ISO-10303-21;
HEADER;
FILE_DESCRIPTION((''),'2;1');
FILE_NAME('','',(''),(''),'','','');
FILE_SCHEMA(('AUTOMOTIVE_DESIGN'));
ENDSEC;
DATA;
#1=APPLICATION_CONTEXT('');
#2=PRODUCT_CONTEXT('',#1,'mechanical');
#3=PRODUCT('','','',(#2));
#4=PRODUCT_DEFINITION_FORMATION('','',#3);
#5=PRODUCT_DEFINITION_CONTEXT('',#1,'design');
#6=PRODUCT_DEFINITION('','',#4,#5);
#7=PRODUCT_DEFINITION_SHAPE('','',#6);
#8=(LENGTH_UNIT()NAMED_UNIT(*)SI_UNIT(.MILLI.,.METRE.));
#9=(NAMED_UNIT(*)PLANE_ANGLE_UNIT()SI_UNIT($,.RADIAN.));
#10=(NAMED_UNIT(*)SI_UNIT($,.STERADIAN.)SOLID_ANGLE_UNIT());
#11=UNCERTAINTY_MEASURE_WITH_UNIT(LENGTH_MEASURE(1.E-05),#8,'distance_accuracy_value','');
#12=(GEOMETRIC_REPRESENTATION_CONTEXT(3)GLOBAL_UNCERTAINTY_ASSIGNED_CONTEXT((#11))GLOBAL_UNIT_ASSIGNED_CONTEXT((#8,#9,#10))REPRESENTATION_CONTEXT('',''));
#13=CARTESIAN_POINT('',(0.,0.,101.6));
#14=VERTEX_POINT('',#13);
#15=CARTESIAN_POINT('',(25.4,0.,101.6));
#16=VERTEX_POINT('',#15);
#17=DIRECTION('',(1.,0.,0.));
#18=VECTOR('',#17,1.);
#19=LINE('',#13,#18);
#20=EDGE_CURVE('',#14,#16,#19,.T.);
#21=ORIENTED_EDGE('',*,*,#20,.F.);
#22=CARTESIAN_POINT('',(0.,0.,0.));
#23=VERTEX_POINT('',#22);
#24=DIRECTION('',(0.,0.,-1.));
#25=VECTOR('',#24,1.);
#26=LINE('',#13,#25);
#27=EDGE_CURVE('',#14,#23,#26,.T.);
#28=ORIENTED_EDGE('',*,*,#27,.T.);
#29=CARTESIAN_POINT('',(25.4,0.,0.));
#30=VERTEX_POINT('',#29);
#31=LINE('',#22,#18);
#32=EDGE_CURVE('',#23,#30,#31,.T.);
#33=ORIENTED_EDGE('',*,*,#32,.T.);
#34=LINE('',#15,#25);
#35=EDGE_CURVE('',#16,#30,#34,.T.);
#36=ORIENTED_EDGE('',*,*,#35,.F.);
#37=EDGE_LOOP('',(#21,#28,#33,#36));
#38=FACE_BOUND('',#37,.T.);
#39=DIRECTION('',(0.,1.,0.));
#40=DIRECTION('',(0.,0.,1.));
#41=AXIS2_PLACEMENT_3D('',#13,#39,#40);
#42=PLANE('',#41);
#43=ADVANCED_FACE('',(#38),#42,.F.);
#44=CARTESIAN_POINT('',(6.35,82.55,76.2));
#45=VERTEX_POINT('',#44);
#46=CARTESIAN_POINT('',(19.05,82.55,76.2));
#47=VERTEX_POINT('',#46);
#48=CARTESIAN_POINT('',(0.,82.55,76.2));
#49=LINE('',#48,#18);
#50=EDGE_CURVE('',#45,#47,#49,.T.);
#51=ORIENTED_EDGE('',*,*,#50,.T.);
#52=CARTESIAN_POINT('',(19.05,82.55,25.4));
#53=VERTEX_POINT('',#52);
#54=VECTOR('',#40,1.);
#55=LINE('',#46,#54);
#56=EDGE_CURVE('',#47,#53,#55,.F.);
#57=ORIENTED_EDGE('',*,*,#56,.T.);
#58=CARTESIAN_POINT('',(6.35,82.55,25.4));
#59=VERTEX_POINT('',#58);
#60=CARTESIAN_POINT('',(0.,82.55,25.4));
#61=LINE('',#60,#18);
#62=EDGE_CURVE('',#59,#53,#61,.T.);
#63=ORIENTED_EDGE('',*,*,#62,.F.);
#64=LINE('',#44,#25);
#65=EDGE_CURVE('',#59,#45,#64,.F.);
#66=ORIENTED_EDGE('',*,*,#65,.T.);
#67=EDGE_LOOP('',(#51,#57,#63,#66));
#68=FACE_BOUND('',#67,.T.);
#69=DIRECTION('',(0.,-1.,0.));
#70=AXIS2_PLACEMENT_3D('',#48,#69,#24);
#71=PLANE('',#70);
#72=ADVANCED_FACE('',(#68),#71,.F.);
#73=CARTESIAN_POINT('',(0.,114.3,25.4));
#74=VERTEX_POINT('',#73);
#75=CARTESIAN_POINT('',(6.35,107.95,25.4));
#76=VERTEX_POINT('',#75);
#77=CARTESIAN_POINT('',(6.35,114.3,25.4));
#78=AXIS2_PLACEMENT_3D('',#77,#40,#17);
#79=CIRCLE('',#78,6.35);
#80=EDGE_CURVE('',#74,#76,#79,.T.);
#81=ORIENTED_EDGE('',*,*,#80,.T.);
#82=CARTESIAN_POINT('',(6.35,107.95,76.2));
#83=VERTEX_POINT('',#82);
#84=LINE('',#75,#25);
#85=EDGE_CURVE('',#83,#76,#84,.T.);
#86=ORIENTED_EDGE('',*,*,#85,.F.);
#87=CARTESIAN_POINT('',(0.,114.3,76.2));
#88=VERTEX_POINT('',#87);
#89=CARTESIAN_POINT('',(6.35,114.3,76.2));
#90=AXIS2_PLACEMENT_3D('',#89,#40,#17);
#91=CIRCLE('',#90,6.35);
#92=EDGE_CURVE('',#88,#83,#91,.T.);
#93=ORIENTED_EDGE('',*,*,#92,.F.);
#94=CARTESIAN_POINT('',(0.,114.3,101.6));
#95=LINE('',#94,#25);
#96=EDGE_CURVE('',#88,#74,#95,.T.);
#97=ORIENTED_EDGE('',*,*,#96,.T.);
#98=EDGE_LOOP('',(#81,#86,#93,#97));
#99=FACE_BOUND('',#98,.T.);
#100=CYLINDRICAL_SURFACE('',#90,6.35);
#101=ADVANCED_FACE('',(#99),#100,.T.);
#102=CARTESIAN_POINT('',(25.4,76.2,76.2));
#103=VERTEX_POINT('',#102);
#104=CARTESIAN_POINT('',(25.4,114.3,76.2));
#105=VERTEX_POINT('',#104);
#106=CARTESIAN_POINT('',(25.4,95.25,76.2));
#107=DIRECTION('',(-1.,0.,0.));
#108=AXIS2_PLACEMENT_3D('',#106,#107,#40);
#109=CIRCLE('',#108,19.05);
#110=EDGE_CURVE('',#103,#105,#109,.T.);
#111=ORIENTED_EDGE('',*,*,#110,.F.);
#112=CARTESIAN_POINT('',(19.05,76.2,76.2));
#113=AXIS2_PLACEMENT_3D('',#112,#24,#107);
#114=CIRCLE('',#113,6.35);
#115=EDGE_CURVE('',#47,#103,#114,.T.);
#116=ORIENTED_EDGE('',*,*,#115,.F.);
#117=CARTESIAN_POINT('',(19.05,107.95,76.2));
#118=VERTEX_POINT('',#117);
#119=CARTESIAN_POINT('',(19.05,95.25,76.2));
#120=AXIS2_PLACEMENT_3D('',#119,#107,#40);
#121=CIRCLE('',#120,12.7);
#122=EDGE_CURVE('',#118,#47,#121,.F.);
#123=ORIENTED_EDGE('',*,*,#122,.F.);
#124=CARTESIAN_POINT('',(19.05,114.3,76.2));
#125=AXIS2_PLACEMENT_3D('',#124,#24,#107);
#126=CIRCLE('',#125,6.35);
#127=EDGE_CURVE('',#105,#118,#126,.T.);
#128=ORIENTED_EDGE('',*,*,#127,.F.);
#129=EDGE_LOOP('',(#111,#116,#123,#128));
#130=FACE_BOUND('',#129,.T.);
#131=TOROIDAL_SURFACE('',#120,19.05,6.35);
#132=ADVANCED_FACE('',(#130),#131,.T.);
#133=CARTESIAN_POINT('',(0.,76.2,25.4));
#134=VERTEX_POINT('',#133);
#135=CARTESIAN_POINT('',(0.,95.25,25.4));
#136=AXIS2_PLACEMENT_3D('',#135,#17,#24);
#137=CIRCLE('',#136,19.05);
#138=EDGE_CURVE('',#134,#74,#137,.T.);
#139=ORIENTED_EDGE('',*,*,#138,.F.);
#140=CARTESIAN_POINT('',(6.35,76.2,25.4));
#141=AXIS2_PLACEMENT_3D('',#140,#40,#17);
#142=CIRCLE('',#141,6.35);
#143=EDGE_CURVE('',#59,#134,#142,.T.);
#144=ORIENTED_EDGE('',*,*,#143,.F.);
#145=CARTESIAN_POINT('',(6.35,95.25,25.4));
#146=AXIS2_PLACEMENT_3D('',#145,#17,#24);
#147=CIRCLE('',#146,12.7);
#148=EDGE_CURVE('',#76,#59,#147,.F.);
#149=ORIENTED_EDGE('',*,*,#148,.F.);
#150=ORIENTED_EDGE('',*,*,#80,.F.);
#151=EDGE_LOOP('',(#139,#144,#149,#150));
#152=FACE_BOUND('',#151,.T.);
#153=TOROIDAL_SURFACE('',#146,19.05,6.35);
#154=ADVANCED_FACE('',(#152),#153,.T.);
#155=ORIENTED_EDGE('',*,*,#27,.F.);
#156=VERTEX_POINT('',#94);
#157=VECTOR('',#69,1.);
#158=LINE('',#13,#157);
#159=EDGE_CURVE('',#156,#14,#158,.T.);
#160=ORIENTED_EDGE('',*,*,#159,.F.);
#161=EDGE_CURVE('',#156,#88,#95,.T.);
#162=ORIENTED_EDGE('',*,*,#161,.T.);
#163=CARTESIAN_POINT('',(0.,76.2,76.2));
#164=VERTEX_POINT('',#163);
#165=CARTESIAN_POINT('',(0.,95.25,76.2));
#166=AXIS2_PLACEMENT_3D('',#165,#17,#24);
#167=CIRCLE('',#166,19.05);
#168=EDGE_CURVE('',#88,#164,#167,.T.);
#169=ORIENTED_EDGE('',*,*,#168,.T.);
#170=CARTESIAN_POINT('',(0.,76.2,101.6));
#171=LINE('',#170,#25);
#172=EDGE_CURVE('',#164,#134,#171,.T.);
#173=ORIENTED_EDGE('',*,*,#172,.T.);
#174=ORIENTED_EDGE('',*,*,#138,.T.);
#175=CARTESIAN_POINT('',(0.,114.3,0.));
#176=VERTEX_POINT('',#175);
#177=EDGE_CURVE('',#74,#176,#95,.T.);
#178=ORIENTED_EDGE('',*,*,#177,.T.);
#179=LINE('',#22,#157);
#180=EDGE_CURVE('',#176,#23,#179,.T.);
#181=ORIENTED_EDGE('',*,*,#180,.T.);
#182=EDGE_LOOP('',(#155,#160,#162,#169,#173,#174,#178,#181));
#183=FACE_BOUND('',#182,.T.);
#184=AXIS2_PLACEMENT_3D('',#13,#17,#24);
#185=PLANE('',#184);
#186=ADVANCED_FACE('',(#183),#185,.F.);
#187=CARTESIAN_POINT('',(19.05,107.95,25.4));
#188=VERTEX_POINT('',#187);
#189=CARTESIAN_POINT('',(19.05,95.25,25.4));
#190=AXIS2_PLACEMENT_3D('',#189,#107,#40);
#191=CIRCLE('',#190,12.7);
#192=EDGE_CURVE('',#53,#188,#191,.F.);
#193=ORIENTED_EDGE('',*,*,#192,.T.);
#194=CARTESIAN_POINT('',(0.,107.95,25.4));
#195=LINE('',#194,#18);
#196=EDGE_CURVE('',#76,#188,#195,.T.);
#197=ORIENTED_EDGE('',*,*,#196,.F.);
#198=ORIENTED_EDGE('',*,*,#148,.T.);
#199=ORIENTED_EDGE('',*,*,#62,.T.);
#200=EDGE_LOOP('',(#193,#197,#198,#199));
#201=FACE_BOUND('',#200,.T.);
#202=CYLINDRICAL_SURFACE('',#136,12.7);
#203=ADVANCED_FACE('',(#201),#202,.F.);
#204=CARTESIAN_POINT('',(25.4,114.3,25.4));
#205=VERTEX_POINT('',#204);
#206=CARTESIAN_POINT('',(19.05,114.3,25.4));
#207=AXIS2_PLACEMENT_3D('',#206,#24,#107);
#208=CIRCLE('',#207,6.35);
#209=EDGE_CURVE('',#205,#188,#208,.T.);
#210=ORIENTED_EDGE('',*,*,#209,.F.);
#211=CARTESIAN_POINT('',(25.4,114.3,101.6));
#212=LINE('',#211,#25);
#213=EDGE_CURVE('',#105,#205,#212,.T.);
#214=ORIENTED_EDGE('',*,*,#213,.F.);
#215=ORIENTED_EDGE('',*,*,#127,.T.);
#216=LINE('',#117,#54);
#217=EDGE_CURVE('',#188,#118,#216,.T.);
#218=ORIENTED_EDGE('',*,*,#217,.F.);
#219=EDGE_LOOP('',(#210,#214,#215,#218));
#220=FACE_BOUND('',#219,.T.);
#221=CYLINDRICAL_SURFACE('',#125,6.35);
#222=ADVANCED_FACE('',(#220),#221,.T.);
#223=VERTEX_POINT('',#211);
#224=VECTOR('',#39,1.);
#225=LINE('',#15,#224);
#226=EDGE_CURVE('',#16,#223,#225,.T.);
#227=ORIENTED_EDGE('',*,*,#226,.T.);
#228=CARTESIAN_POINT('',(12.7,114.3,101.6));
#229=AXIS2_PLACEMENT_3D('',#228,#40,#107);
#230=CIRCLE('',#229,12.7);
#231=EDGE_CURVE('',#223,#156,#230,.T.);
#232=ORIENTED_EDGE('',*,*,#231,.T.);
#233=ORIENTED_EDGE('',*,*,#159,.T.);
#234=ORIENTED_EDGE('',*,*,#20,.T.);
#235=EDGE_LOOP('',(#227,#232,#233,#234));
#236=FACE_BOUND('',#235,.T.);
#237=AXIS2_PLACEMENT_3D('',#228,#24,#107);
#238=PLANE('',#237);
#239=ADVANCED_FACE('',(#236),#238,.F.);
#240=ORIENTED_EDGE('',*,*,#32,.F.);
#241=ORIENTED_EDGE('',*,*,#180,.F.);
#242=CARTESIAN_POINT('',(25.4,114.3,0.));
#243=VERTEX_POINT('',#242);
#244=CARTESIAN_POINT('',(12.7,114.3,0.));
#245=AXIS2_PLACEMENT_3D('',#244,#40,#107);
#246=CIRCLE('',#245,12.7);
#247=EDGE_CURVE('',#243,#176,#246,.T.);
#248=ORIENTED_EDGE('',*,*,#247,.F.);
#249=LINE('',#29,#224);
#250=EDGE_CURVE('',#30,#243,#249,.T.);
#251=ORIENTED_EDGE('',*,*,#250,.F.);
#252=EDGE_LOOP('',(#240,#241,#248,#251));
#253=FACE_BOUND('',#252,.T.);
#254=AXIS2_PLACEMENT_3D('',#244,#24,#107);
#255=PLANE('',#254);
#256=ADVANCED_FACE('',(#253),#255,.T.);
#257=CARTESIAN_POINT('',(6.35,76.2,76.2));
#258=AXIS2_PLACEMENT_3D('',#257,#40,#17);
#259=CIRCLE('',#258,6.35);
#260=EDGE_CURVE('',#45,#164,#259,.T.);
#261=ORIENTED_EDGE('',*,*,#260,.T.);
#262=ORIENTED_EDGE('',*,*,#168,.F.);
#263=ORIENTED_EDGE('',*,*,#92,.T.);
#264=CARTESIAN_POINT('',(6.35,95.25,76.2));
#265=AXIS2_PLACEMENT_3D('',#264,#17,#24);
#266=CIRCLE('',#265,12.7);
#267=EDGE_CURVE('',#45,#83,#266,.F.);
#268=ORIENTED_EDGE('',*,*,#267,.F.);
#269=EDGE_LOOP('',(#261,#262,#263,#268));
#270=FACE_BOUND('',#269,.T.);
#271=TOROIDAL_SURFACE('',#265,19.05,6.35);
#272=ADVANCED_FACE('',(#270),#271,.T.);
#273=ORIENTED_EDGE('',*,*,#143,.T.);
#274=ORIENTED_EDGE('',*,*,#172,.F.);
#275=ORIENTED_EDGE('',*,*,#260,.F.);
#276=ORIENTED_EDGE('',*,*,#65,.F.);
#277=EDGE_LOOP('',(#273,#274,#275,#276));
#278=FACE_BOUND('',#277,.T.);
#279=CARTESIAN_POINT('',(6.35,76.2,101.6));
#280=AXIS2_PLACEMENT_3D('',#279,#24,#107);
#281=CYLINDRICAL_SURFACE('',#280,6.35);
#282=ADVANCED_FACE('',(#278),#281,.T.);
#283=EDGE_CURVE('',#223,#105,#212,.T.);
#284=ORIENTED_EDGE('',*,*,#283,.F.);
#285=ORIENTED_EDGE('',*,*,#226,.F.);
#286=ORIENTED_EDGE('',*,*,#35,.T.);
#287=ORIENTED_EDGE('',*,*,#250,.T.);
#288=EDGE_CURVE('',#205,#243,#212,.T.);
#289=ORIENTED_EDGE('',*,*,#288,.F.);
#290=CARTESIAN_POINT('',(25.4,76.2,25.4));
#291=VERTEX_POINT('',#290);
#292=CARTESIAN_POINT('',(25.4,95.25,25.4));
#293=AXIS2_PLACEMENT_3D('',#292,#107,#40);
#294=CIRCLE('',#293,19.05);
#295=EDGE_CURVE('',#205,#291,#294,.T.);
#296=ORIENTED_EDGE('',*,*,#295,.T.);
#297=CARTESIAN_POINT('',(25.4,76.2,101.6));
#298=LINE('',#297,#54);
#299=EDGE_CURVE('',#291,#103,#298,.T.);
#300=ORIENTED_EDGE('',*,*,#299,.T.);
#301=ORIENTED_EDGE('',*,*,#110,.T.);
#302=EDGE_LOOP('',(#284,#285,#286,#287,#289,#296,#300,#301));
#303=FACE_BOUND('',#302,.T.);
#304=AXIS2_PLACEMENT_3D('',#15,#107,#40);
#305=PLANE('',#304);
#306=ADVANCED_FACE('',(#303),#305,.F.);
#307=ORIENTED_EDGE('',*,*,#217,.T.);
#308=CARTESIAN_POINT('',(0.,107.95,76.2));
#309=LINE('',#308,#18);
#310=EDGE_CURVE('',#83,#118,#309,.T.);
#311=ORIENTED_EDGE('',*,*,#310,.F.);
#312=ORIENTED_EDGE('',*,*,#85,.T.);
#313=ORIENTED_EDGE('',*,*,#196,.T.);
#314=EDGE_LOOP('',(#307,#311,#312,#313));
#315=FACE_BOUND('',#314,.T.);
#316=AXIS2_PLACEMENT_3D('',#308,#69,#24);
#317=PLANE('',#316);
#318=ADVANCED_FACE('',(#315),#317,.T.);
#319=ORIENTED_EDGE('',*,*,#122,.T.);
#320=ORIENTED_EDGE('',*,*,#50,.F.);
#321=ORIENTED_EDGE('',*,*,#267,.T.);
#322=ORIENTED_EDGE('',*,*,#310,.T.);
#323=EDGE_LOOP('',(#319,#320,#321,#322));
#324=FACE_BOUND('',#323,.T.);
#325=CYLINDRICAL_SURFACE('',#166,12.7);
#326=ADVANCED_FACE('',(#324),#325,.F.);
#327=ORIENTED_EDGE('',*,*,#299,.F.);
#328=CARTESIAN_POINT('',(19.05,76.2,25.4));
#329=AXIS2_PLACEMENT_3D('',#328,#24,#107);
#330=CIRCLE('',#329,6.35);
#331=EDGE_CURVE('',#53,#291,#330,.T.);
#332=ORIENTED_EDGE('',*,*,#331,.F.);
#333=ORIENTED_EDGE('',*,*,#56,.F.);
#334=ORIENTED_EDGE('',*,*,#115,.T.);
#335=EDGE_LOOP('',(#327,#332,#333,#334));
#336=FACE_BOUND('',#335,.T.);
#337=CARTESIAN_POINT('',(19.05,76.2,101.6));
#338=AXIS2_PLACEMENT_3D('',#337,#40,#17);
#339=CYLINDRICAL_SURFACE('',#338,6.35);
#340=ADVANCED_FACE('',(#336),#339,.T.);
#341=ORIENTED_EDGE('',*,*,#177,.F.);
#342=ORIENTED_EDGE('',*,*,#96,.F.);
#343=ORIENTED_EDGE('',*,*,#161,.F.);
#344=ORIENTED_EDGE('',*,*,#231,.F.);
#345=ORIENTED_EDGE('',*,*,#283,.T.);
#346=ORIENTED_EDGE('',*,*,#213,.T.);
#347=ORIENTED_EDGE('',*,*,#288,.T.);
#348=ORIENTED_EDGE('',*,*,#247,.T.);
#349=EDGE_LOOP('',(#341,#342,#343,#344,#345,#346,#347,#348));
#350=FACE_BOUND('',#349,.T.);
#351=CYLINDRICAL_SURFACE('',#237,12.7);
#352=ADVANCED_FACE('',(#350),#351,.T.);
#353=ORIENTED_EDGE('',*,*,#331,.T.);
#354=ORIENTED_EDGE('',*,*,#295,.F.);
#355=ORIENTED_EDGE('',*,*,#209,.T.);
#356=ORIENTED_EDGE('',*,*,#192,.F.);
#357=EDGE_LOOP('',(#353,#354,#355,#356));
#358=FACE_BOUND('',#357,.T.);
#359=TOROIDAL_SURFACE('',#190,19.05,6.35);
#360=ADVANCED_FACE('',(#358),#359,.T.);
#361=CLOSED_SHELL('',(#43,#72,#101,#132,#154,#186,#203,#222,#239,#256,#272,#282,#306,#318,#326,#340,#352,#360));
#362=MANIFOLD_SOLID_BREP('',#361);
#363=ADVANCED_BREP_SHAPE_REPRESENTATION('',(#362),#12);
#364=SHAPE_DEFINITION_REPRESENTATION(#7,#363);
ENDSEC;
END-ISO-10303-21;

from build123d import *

# Parameters (mm, degrees)
BOSS_EXTRUDE1_DEPTH     = 101.6
CUT_EXTRUDE1_DEPTH      = 165.61081374
CUT_EXTRUDE1_DEPTH_BACK = 165.61081374
FILLET6_R               = 6.35
FILLET7_R               = 6.35


with BuildPart() as part:
    # Sketch1 → Boss-Extrude1 (new body)
    with BuildSketch(Plane.XY):
        with BuildLine():
            Line((0, 0), (25.4, 0))
            Line((25.4, 0), (25.4, 114.3))
            ThreePointArc((25.4, 114.3), (12.7, 127), (0, 114.3))
            Line((0, 114.3), (0, 0))
        make_face()
    extrude(amount=BOSS_EXTRUDE1_DEPTH)

    # Sketch2 → Cut-Extrude1 (cut, two sides: drawn at the far end of the back side and taken through both)
    with BuildSketch(Plane(origin=(25.4, 0, 0), x_dir=(0, 0, -1), z_dir=(1, 0, 0)).offset(-CUT_EXTRUDE1_DEPTH_BACK)):
        with BuildLine():
            Line((-76.2, 107.95), (-25.4, 107.95))
            ThreePointArc((-25.4, 107.95), (-12.7, 95.25), (-25.4, 82.55))
            Line((-25.4, 82.55), (-76.2, 82.55))
            ThreePointArc((-76.2, 82.55), (-88.9, 95.25), (-76.2, 107.95))
        make_face()
    extrude(amount=CUT_EXTRUDE1_DEPTH + CUT_EXTRUDE1_DEPTH_BACK, mode=Mode.SUBTRACT)

    # Fillet6
    fillet6_edges = [part.edges().sort_by_distance(p)[0] for p in [
        (0, 95.25, 88.9),
        (0, 95.25, 12.7),
        (0, 82.55, 50.8),
        (0, 107.95, 50.8),
    ]]
    fillet(fillet6_edges, radius=FILLET6_R - 0.0001)  # a hair under: the kernel refuses the full size

    # Fillet7
    fillet7_edges = [part.edges().sort_by_distance(p)[0] for p in [
        (25.4, 82.55, 50.8),
        (25.4, 95.25, 12.7),
        (25.4, 107.95, 50.8),
        (25.4, 95.25, 88.9),
    ]]
    fillet(fillet7_edges, radius=FILLET7_R - 0.0001)  # a hair under: the kernel refuses the full size


solid = part.part
